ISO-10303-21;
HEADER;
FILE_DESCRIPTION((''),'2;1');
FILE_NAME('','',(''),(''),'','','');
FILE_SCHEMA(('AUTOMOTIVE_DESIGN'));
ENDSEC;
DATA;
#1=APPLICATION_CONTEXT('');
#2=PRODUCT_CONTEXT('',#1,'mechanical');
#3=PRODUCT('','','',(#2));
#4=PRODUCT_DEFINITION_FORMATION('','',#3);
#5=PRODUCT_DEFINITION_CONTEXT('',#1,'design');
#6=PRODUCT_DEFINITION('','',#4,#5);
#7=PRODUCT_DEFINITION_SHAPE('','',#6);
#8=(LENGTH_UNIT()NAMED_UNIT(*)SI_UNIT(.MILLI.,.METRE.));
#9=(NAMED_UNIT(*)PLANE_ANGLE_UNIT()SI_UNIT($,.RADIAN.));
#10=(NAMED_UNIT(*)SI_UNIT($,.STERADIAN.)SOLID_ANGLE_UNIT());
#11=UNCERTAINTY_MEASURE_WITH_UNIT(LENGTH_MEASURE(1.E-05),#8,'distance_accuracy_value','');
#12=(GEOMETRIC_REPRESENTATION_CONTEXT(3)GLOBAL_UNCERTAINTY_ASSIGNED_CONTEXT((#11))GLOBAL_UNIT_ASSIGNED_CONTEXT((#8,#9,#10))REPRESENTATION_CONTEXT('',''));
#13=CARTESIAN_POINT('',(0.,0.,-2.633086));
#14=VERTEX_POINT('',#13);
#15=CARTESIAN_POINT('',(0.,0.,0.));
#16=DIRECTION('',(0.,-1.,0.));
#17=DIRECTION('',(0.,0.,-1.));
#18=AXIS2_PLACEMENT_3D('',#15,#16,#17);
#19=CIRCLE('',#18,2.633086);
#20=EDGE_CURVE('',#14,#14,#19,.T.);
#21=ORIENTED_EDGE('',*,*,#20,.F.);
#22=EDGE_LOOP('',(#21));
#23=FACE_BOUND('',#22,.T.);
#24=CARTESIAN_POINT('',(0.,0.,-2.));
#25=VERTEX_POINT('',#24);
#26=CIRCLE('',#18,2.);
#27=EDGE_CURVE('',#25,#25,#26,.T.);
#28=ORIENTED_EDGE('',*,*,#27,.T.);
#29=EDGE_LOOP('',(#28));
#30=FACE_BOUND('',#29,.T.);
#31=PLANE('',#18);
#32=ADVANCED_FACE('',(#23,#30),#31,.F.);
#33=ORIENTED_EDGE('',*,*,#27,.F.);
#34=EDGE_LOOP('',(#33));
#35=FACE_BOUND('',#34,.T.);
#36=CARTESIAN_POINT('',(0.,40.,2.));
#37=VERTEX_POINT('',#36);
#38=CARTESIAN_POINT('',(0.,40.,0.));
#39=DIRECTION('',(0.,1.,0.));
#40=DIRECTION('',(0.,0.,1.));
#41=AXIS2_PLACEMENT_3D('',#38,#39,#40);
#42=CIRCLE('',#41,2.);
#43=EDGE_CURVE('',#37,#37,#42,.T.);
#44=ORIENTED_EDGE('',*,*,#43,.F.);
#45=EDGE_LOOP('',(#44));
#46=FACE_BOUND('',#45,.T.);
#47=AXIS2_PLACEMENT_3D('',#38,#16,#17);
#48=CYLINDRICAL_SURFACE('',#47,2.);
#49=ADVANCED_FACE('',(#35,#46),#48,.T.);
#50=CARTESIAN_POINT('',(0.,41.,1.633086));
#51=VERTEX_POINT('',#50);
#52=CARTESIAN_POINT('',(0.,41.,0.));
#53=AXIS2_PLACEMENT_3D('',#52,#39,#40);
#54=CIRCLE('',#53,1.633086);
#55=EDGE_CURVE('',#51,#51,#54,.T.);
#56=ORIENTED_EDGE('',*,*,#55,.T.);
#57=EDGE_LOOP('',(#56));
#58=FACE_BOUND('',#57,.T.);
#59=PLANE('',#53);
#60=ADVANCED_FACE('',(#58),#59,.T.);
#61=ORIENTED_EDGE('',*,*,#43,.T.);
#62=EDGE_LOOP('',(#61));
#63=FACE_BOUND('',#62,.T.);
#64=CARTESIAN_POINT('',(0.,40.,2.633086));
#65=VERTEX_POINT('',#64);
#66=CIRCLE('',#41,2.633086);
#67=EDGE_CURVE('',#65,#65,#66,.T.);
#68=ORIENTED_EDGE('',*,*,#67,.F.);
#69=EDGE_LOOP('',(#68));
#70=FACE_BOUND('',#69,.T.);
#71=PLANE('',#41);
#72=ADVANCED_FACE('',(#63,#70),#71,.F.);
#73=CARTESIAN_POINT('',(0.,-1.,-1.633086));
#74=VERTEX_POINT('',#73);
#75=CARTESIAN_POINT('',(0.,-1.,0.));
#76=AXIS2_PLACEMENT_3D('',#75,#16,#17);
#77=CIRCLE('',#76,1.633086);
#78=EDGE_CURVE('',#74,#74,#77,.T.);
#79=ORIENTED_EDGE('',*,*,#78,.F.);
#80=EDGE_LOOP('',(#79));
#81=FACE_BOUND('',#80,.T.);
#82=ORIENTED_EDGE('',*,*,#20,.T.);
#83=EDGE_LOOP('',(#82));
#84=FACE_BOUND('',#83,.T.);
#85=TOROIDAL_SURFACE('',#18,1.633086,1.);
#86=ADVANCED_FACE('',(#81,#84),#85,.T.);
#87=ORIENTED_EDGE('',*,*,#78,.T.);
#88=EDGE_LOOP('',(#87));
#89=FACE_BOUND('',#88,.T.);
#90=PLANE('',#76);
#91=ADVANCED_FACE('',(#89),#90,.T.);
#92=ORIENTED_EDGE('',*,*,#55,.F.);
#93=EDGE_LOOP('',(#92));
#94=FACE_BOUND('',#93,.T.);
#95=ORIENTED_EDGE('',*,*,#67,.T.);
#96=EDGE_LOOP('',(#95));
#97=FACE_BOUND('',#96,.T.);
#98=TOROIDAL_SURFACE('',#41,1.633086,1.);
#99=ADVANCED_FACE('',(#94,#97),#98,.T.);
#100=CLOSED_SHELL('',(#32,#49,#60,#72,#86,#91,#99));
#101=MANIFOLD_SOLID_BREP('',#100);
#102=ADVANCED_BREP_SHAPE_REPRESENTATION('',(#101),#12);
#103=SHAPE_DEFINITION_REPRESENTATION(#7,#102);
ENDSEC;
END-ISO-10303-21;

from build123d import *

# Parameters (mm, degrees)
SKETCH1_R           = 2
BOSS_EXTRUDE1_DEPTH = 40
SKETCH2_R           = 2.633085966
BOSS_EXTRUDE2_DEPTH = 1
FILLET1_R           = 1
BOSS_EXTRUDE3_START = 1
SKETCH3_R           = 2.633085966
BOSS_EXTRUDE3_DEPTH = 1
FILLET2_R           = 1


with BuildPart() as part:
    # Sketch1 → Boss-Extrude1 (new body)
    with BuildSketch(Plane(origin=(0, 0, 0), x_dir=(1, 0, 0), z_dir=(0, 1, 0))):
        with Locations(Location((0, 0, 0), (0, 0, 90))):
            Circle(SKETCH1_R)
    extrude(amount=BOSS_EXTRUDE1_DEPTH)

    # Sketch2 → Boss-Extrude2 (add)
    with BuildSketch(Plane(origin=(0, 40, 0), x_dir=(1, 0, 0), z_dir=(0, 1, 0))):
        Circle(SKETCH2_R)
    extrude(amount=BOSS_EXTRUDE2_DEPTH)

    # Fillet1
    fillet1_edges = [part.edges().sort_by_distance(p)[0] for p in [
        (-2.633085966, 41, 0),
    ]]
    fillet(fillet1_edges, radius=FILLET1_R - 0.0001)  # a hair under: the kernel refuses the full size

    # Sketch3 → Boss-Extrude3 (add)
    with BuildSketch(Plane.XZ.offset(BOSS_EXTRUDE3_START)):
        Circle(SKETCH3_R)
    extrude(amount=-BOSS_EXTRUDE3_DEPTH)

    # Fillet2
    fillet2_edges = [part.edges().sort_by_distance(p)[0] for p in [
        (-2.633085966, -1, 0),
    ]]
    fillet(fillet2_edges, radius=FILLET2_R - 0.0001)  # a hair under: the kernel refuses the full size


solid = part.part
